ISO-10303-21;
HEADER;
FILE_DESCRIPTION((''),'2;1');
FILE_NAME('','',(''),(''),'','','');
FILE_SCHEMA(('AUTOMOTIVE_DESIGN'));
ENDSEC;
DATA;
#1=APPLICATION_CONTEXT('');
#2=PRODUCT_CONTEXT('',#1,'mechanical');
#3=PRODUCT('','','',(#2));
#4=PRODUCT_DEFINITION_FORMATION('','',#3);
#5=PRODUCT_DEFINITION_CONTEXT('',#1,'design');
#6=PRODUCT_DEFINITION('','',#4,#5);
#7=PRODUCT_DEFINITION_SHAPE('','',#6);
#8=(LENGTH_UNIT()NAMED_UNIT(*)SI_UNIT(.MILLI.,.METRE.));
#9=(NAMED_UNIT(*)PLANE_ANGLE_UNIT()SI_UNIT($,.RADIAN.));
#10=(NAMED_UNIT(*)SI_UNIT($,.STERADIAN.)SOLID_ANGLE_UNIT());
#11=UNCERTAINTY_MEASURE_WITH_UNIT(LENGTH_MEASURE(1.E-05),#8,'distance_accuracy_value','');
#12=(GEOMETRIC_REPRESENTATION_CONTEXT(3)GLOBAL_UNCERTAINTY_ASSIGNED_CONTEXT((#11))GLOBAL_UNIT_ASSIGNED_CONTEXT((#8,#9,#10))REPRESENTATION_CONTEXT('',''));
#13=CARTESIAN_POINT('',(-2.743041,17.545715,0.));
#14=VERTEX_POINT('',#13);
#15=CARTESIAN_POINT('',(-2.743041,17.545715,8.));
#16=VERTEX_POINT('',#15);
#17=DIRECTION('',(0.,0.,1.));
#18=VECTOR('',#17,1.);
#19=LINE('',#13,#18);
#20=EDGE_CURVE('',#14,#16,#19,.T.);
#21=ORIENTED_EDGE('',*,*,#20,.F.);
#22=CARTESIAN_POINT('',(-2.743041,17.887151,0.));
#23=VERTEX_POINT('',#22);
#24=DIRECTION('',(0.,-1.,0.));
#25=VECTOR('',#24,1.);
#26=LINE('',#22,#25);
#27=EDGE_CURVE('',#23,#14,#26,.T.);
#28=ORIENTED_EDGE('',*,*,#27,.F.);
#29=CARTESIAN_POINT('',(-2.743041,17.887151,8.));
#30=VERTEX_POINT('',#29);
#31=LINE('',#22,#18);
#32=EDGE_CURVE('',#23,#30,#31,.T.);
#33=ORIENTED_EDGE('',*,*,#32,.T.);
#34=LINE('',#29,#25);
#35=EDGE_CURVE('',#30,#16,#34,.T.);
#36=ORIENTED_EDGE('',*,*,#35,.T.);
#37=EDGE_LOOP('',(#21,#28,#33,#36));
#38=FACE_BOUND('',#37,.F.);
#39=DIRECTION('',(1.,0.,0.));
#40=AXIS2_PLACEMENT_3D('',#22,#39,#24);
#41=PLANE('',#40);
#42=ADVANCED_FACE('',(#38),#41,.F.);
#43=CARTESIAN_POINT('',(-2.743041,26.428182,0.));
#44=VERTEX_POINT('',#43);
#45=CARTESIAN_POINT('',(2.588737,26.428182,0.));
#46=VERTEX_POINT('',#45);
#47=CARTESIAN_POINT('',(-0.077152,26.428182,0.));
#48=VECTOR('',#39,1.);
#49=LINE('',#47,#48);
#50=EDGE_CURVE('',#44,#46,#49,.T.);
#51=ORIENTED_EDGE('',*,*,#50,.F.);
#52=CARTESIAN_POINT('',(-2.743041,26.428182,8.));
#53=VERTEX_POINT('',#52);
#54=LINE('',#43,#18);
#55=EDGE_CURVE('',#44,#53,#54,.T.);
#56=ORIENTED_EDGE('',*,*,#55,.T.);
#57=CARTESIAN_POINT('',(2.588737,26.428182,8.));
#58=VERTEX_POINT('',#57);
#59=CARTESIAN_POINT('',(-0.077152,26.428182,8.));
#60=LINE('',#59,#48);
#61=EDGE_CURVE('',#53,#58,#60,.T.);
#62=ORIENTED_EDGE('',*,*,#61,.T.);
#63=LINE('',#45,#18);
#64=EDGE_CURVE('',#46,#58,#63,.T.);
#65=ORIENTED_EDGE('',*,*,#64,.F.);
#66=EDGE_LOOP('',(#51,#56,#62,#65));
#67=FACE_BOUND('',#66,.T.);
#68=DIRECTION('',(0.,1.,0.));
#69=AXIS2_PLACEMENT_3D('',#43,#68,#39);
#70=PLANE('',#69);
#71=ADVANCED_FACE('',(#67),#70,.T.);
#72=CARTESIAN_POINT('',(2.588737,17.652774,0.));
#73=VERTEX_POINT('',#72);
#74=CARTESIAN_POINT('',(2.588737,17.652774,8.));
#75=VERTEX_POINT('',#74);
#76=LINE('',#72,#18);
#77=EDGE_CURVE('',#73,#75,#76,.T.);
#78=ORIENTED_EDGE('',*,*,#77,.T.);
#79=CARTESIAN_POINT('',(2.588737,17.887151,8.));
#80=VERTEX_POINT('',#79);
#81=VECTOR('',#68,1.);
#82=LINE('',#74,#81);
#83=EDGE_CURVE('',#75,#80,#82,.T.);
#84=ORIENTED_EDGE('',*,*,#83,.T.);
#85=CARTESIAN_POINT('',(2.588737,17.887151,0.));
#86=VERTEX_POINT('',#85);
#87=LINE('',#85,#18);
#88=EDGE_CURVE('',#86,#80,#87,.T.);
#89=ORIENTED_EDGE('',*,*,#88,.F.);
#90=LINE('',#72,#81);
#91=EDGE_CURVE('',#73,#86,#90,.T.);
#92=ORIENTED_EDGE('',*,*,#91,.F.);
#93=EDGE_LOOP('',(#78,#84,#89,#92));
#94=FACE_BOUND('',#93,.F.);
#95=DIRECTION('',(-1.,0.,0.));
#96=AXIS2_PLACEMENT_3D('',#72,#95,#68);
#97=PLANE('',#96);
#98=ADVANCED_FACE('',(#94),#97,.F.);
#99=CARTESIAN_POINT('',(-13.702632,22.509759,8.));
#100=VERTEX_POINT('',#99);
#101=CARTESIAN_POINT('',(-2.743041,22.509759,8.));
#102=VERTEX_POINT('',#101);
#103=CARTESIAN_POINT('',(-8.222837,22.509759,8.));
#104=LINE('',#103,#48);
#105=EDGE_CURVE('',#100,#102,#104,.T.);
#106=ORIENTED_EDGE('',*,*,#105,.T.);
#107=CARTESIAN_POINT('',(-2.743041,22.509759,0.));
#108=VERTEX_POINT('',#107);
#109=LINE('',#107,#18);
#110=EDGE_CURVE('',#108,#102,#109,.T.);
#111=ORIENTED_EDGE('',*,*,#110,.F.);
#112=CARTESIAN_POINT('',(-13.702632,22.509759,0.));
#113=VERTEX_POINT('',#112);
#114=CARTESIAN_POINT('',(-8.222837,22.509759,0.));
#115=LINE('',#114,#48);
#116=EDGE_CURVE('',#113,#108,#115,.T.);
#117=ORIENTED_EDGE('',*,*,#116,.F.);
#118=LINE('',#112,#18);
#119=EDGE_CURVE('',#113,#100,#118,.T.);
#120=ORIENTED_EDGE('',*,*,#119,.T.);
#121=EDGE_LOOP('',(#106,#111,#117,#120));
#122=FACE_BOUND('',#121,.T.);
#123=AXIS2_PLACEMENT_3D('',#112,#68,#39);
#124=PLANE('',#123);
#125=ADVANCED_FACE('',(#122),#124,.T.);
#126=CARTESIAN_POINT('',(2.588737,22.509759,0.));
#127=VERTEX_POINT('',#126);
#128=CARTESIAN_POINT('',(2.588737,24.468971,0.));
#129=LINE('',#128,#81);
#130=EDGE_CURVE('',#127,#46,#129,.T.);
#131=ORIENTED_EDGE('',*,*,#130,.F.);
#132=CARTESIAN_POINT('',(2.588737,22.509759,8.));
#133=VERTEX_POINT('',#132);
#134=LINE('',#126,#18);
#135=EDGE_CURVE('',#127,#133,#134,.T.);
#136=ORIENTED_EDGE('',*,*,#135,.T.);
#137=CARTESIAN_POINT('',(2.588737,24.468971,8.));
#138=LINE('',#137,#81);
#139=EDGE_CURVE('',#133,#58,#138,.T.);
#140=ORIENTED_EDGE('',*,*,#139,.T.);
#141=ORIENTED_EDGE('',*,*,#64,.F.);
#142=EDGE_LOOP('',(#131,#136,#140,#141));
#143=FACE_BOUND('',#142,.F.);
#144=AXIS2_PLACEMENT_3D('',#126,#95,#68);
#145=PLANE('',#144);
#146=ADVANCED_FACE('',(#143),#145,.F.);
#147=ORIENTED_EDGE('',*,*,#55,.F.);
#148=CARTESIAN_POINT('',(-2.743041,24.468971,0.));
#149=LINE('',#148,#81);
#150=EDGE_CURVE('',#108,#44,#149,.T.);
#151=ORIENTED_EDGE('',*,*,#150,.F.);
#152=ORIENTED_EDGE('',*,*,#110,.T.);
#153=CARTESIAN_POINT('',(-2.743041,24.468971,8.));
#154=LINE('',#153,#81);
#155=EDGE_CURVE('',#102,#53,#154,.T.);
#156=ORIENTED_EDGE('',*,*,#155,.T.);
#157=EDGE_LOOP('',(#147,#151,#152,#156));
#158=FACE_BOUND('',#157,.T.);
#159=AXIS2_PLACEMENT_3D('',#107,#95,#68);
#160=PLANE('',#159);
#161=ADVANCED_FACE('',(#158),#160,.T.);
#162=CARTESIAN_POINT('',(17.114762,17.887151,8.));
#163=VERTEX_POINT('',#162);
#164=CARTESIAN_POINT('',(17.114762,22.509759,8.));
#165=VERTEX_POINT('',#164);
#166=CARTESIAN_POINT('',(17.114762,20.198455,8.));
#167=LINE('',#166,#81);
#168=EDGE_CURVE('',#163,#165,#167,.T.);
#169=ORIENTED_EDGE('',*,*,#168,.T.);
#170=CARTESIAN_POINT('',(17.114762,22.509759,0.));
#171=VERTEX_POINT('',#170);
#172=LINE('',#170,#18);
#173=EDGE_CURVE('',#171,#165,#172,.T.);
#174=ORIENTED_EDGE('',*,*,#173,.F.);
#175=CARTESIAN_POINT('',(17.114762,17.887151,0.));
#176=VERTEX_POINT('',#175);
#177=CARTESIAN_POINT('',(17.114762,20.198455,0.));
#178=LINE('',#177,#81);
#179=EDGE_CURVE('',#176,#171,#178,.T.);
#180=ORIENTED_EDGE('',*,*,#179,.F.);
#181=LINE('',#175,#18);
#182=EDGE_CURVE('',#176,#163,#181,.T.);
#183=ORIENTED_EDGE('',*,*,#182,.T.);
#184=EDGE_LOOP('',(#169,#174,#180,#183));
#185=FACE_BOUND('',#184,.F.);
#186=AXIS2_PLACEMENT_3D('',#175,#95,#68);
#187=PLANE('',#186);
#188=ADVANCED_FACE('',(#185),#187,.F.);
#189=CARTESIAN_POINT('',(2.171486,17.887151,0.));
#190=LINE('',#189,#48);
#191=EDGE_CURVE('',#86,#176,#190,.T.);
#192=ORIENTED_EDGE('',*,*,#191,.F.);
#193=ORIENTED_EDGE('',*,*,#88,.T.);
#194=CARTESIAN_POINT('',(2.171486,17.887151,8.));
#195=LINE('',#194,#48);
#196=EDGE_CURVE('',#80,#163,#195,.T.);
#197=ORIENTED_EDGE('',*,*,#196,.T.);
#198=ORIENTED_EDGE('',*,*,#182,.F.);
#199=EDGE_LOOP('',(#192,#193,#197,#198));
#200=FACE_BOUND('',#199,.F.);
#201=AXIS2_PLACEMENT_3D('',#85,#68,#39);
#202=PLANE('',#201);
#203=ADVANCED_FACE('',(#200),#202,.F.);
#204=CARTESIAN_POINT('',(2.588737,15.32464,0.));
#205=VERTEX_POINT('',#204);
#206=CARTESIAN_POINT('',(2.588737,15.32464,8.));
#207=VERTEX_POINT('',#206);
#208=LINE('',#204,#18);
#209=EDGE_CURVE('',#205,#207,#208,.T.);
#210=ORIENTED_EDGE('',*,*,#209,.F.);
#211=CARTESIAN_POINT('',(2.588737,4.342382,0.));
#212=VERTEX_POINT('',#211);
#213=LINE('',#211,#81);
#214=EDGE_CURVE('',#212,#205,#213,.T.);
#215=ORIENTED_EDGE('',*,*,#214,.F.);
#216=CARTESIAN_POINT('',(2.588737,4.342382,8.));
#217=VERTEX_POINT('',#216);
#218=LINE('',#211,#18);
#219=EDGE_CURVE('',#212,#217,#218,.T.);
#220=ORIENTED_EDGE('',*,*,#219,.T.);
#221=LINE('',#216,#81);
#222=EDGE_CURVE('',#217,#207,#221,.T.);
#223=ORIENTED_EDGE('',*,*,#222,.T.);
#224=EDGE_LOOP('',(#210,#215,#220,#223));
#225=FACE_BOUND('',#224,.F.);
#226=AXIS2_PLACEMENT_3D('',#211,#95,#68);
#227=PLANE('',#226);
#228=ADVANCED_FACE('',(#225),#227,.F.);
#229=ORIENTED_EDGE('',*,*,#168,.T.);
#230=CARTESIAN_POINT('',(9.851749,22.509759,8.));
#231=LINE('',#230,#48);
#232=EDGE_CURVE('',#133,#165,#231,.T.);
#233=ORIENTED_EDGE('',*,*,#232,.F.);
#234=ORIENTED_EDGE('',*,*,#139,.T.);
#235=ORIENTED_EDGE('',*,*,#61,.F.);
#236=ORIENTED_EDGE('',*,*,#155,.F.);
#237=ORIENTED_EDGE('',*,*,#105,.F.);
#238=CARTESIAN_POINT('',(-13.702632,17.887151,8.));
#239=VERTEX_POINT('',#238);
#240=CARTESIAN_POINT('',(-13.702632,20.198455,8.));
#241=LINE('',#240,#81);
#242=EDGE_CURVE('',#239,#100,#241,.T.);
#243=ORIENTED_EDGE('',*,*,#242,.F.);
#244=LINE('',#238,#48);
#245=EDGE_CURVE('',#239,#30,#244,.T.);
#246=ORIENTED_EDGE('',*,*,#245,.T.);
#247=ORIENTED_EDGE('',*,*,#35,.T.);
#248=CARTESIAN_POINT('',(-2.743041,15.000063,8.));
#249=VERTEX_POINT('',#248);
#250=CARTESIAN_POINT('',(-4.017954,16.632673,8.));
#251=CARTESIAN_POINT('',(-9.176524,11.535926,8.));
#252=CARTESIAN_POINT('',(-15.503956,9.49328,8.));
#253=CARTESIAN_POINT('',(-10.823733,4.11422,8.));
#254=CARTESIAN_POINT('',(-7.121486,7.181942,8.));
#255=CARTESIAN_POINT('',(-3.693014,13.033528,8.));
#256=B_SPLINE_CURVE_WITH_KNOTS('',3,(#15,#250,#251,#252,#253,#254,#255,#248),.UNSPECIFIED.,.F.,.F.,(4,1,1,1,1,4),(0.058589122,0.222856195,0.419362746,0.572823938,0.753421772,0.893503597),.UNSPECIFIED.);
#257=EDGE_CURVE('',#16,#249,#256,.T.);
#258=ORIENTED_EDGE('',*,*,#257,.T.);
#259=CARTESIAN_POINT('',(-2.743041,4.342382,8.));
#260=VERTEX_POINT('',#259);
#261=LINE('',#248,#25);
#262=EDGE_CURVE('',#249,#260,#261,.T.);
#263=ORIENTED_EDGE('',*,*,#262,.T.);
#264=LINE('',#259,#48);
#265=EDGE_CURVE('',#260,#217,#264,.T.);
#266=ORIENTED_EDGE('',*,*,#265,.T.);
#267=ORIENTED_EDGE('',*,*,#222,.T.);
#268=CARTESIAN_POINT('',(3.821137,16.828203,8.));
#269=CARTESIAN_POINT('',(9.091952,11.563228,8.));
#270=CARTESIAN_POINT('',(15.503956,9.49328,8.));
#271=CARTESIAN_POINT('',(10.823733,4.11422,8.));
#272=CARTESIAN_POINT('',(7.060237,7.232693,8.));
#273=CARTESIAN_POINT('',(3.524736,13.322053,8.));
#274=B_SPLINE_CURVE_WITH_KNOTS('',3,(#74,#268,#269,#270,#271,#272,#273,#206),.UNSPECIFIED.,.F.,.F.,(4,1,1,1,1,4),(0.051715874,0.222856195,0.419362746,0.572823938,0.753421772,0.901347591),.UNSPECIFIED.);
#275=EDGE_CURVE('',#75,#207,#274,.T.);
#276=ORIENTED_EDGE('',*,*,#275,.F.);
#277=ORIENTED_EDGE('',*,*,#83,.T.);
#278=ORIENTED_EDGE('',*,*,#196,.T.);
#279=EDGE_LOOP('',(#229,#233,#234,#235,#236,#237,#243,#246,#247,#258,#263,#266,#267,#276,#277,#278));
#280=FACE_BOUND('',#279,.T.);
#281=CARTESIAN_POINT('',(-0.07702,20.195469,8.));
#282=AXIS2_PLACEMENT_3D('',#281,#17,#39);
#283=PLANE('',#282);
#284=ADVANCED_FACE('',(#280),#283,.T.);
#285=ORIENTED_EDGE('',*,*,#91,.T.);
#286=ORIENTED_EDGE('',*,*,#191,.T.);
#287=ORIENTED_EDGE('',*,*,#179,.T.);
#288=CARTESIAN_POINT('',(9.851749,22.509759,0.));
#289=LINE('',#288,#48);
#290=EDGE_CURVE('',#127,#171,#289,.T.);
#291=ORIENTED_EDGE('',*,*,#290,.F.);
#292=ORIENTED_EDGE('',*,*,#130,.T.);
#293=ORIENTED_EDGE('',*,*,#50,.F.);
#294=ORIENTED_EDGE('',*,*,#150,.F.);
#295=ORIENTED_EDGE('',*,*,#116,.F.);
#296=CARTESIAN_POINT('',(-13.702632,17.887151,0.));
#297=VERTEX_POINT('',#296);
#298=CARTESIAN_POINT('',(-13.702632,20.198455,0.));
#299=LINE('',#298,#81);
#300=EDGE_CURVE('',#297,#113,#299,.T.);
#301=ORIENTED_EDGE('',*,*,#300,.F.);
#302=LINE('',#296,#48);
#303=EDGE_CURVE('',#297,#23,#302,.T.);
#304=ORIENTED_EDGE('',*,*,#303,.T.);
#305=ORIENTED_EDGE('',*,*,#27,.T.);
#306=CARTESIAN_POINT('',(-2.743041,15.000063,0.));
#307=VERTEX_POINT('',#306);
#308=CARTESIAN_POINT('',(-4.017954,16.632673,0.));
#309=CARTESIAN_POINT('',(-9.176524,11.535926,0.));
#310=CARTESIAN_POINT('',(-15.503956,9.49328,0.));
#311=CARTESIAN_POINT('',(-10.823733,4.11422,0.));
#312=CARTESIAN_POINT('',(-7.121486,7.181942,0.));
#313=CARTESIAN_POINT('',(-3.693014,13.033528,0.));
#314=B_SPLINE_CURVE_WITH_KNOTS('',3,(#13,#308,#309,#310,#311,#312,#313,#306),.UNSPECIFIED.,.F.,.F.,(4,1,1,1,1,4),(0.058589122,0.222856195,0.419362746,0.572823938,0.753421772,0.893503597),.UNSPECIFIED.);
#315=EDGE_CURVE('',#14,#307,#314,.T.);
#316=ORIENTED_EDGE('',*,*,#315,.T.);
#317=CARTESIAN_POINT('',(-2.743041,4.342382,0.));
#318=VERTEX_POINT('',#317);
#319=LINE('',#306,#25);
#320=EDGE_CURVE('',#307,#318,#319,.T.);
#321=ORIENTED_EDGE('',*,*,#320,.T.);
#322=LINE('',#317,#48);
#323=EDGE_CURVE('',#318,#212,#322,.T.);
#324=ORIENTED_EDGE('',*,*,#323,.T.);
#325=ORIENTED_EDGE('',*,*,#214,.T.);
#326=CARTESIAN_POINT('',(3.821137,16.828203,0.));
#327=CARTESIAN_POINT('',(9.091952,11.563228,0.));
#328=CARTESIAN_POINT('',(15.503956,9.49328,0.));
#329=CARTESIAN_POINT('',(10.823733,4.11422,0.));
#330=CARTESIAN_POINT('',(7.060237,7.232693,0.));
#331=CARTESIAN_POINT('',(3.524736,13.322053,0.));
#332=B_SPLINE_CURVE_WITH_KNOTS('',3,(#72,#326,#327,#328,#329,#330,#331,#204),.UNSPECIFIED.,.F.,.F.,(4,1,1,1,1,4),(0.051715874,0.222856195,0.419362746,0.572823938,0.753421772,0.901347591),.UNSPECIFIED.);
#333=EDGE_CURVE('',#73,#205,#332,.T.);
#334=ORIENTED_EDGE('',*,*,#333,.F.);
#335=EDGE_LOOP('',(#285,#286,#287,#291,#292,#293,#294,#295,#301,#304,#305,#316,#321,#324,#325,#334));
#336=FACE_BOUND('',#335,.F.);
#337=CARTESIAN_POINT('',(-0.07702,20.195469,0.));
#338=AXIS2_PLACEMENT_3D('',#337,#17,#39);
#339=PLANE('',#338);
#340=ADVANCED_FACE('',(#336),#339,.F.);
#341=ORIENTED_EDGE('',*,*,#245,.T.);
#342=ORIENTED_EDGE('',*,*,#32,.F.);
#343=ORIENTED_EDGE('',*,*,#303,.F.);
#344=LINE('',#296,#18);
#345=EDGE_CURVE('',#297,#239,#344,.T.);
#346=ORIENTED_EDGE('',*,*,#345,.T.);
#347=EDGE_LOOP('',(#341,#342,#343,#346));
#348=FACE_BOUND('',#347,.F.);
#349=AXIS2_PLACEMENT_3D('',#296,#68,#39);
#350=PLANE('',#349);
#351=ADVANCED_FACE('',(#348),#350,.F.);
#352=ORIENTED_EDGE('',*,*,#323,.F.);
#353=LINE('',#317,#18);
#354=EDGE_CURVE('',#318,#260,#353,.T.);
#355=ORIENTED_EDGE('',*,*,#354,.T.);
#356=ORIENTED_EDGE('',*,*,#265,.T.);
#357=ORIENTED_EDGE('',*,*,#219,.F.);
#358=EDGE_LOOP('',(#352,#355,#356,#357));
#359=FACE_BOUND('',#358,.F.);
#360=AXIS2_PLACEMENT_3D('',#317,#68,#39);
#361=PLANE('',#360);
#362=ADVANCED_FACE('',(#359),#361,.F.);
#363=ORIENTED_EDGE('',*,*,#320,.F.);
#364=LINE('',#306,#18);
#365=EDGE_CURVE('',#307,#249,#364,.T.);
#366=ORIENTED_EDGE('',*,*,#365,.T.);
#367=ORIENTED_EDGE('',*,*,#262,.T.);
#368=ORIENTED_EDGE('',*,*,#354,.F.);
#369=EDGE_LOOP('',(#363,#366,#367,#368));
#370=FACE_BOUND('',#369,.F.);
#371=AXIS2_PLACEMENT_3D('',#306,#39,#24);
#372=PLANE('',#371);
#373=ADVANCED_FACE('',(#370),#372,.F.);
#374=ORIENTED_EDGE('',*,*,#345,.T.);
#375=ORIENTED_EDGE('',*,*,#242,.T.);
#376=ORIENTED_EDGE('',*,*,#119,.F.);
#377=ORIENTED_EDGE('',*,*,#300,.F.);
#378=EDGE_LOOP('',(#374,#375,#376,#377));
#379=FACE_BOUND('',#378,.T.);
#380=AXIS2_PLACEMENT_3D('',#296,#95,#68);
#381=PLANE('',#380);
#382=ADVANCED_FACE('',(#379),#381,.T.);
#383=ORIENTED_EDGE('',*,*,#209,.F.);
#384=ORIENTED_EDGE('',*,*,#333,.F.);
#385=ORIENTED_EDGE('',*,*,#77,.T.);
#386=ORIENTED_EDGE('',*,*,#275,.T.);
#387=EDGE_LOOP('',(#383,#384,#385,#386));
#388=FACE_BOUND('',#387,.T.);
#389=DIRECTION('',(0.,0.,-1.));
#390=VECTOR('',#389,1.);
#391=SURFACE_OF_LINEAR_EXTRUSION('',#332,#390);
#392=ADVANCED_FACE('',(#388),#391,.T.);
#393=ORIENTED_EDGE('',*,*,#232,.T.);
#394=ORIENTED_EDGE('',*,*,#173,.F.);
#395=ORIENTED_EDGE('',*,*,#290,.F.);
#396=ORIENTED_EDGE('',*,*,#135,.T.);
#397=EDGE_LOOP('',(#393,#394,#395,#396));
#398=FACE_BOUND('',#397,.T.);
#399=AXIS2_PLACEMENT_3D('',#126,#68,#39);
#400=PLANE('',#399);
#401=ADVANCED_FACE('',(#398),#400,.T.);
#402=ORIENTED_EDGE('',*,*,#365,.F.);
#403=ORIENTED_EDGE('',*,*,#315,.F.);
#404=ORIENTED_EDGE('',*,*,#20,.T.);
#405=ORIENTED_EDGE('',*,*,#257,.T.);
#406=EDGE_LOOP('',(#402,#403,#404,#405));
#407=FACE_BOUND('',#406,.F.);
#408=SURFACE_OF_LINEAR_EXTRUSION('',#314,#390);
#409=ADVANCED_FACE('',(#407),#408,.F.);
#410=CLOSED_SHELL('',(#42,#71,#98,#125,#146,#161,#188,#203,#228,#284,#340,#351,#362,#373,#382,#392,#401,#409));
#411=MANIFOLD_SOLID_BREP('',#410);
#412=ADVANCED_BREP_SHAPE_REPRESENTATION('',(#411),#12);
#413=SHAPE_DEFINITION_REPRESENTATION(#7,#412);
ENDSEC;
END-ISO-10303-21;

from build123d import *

# Parameters (mm, degrees)
F0_W     = 5.3317777347
F0_H     = 3.9184228517
F0_W_2   = 10.9595907852
F0_H_2   = 4.6226084232
F0_W_3   = 14.5260256249
F1_DEPTH = 8


# Not quite as in the source:
# - a feature names something its author has since deleted; it is built from what else it names


with BuildPart() as f1:
    # F0 (on Top) → F1 (new body)
    with BuildSketch(Plane.XY):
        with BuildLine():
            Line((2.5887365919, 22.509759292), (-2.7430411428, 22.509759292))
            Line((-2.7430411428, 22.509759292), (-2.7430411428, 17.8871508688))
            Line((-2.7430411428, 17.8871508688), (-2.1714857529, 17.8871508688))
            add(Edge.make_bspline(
                [(-1.8442005385, 17.8871508688), (-1.9073601168, 17.9527169942), (-2.0187846445, 17.9485893157), (-2.1714857529, 17.8871508688)],
                knots=[0, 0, 0, 0, 0.0293672898, 0.0293672898, 0.0293672898, 0.0293672898], degree=3))
            Line((-1.8442005385, 17.8871508688), (1.8442005385, 17.8871508688))
            add(Edge.make_bspline(
                [(1.8442005385, 17.8871508688), (1.9073601168, 17.9527169942), (2.0187846445, 17.9485893157), (2.1714857529, 17.8871508688)],
                knots=[0, 0, 0, 0, 0.0293672898, 0.0293672898, 0.0293672898, 0.0293672898], degree=3))
            Line((2.1714857529, 17.8871508688), (2.5887365919, 17.8871508688))
            Line((2.5887365919, 17.8871508688), (2.5887365919, 22.509759292))
        make_face()
        with Locations((-0.0771522755, 24.4689707179)):
            Rectangle(F0_W, F0_H)
        with Locations((-8.2228365354, 20.1984550804)):
            Rectangle(F0_W_2, F0_H_2)
        with BuildLine():
            add(Edge.make_bspline(
                [(2.1714857529, 17.8871508688), (2.287691695, 17.8403960503), (2.4278019357, 17.7604511347), (2.5887365919, 17.652773519)],
                knots=[0.0293672898, 0.0293672898, 0.0293672898, 0.0293672898, 0.051715874, 0.051715874, 0.051715874, 0.051715874], degree=3))
            Line((2.1714857529, 17.8871508688), (1.8442005385, 17.8871508688))
            add(Edge.make_bspline(
                [(2.5887365919, 15.3246397381), (1.9645139549, 16.6601739446), (1.6320309917, 17.6668971006), (1.8442005385, 17.8871508688)],
                knots=[0.9013475906, 0.9013475906, 0.9013475906, 0.9013475906, 1, 1, 1, 1], degree=3))
            Line((2.5887365919, 15.3246397381), (2.5887365919, 17.652773519))
        make_face()
        with Locations((9.8517494043, 20.1984550804)):
            Rectangle(F0_W_3, F0_H_2)
        with BuildLine():
            Line((-2.7430411428, 15.0000628183), (-2.7430411428, 17.5457150476))
            add(Edge.make_bspline(
                [(-2.7430411428, 17.5457150476), (-4.0179544262, 16.6326728497), (-9.1765243527, 11.5359259625), (-15.5039563603, 9.4932798244), (-10.823733112, 4.1142195469), (-7.1214858799, 7.1819415818), (-3.6930140846, 13.0335276913), (-2.7430411428, 15.0000628183)],
                knots=[0.0585891222, 0.0585891222, 0.0585891222, 0.0585891222, 0.2228561947, 0.4193627461, 0.5728239375, 0.7534217718, 0.8935035971, 0.8935035971, 0.8935035971, 0.8935035971], degree=3))
        make_face()
        with BuildLine():
            add(Edge.make_bspline(
                [(2.5887365919, 17.652773519), (3.8211371956, 16.8282030892), (9.0919520737, 11.5632279135), (15.5039563603, 9.4932798244), (10.823733112, 4.1142195469), (7.0602374067, 7.2326927282), (3.5247364856, 13.3220531586), (2.5887365919, 15.3246397381)],
                knots=[0.051715874, 0.051715874, 0.051715874, 0.051715874, 0.2228561947, 0.4193627461, 0.5728239375, 0.7534217718, 0.9013475906, 0.9013475906, 0.9013475906, 0.9013475906], degree=3))
            Line((2.5887365919, 17.652773519), (2.5887365919, 15.3246397381))
        make_face()
        with BuildLine():
            Line((-1.8442005385, 17.8871508688), (-2.1714857529, 17.8871508688))
            add(Edge.make_bspline(
                [(-2.1714857529, 17.8871508688), (-2.323430526, 17.8260167292), (-2.516244003, 17.7081381407), (-2.7430411428, 17.5457150476)],
                knots=[0.0293672898, 0.0293672898, 0.0293672898, 0.0293672898, 0.0585891222, 0.0585891222, 0.0585891222, 0.0585891222], degree=3))
            Line((-2.7430411428, 17.5457150476), (-2.7430411428, 15.0000628183))
            add(Edge.make_bspline(
                [(-2.7430411428, 15.0000628183), (-2.0208296717, 16.4951098503), (-1.615161089, 17.64938441), (-1.8442005385, 17.8871508688)],
                knots=[0.8935035971, 0.8935035971, 0.8935035971, 0.8935035971, 1, 1, 1, 1], degree=3))
        make_face()
        with BuildLine():
            Line((1.8442005385, 17.8871508688), (-1.8442005385, 17.8871508688))
            add(Edge.make_bspline(
                [(-2.7430411428, 15.0000628183), (-2.0208296717, 16.4951098503), (-1.615161089, 17.64938441), (-1.8442005385, 17.8871508688)],
                knots=[0.8935035971, 0.8935035971, 0.8935035971, 0.8935035971, 1, 1, 1, 1], degree=3))
            Line((-2.7430411428, 15.0000628183), (-2.7430411428, 4.3423823081))
            Line((-2.7430411428, 4.3423823081), (2.5887365919, 4.3423823081))
            Line((2.5887365919, 4.3423823081), (2.5887365919, 15.3246397381))
            add(Edge.make_bspline(
                [(2.5887365919, 15.3246397381), (1.9645139549, 16.6601739446), (1.6320309917, 17.6668971006), (1.8442005385, 17.8871508688)],
                knots=[0.9013475906, 0.9013475906, 0.9013475906, 0.9013475906, 1, 1, 1, 1], degree=3))
        make_face()
        with BuildLine():
            Line((2.5887365919, 17.652773519), (2.5887365919, 17.8871508688))
            Line((2.5887365919, 17.8871508688), (2.1714857529, 17.8871508688))
            add(Edge.make_bspline(
                [(2.1714857529, 17.8871508688), (2.287691695, 17.8403960503), (2.4278019357, 17.7604511347), (2.5887365919, 17.652773519)],
                knots=[0.0293672898, 0.0293672898, 0.0293672898, 0.0293672898, 0.051715874, 0.051715874, 0.051715874, 0.051715874], degree=3))
        make_face()
        with BuildLine():
            Line((-2.1714857529, 17.8871508688), (-2.7430411428, 17.8871508688))
            Line((-2.7430411428, 17.8871508688), (-2.7430411428, 17.5457150476))
            add(Edge.make_bspline(
                [(-2.1714857529, 17.8871508688), (-2.323430526, 17.8260167292), (-2.516244003, 17.7081381407), (-2.7430411428, 17.5457150476)],
                knots=[0.0293672898, 0.0293672898, 0.0293672898, 0.0293672898, 0.0585891222, 0.0585891222, 0.0585891222, 0.0585891222], degree=3))
        make_face()
        with BuildLine():
            add(Edge.make_bspline(
                [(-1.8442005385, 17.8871508688), (-1.9073601168, 17.9527169942), (-2.0187846445, 17.9485893157), (-2.1714857529, 17.8871508688)],
                knots=[0, 0, 0, 0, 0.0293672898, 0.0293672898, 0.0293672898, 0.0293672898], degree=3))
            Line((-2.1714857529, 17.8871508688), (-1.8442005385, 17.8871508688))
        make_face()
        with BuildLine():
            Line((1.8442005385, 17.8871508688), (2.1714857529, 17.8871508688))
            add(Edge.make_bspline(
                [(1.8442005385, 17.8871508688), (1.9073601168, 17.9527169942), (2.0187846445, 17.9485893157), (2.1714857529, 17.8871508688)],
                knots=[0, 0, 0, 0, 0.0293672898, 0.0293672898, 0.0293672898, 0.0293672898], degree=3))
        make_face()
    extrude(amount=F1_DEPTH)


solid = f1.part
